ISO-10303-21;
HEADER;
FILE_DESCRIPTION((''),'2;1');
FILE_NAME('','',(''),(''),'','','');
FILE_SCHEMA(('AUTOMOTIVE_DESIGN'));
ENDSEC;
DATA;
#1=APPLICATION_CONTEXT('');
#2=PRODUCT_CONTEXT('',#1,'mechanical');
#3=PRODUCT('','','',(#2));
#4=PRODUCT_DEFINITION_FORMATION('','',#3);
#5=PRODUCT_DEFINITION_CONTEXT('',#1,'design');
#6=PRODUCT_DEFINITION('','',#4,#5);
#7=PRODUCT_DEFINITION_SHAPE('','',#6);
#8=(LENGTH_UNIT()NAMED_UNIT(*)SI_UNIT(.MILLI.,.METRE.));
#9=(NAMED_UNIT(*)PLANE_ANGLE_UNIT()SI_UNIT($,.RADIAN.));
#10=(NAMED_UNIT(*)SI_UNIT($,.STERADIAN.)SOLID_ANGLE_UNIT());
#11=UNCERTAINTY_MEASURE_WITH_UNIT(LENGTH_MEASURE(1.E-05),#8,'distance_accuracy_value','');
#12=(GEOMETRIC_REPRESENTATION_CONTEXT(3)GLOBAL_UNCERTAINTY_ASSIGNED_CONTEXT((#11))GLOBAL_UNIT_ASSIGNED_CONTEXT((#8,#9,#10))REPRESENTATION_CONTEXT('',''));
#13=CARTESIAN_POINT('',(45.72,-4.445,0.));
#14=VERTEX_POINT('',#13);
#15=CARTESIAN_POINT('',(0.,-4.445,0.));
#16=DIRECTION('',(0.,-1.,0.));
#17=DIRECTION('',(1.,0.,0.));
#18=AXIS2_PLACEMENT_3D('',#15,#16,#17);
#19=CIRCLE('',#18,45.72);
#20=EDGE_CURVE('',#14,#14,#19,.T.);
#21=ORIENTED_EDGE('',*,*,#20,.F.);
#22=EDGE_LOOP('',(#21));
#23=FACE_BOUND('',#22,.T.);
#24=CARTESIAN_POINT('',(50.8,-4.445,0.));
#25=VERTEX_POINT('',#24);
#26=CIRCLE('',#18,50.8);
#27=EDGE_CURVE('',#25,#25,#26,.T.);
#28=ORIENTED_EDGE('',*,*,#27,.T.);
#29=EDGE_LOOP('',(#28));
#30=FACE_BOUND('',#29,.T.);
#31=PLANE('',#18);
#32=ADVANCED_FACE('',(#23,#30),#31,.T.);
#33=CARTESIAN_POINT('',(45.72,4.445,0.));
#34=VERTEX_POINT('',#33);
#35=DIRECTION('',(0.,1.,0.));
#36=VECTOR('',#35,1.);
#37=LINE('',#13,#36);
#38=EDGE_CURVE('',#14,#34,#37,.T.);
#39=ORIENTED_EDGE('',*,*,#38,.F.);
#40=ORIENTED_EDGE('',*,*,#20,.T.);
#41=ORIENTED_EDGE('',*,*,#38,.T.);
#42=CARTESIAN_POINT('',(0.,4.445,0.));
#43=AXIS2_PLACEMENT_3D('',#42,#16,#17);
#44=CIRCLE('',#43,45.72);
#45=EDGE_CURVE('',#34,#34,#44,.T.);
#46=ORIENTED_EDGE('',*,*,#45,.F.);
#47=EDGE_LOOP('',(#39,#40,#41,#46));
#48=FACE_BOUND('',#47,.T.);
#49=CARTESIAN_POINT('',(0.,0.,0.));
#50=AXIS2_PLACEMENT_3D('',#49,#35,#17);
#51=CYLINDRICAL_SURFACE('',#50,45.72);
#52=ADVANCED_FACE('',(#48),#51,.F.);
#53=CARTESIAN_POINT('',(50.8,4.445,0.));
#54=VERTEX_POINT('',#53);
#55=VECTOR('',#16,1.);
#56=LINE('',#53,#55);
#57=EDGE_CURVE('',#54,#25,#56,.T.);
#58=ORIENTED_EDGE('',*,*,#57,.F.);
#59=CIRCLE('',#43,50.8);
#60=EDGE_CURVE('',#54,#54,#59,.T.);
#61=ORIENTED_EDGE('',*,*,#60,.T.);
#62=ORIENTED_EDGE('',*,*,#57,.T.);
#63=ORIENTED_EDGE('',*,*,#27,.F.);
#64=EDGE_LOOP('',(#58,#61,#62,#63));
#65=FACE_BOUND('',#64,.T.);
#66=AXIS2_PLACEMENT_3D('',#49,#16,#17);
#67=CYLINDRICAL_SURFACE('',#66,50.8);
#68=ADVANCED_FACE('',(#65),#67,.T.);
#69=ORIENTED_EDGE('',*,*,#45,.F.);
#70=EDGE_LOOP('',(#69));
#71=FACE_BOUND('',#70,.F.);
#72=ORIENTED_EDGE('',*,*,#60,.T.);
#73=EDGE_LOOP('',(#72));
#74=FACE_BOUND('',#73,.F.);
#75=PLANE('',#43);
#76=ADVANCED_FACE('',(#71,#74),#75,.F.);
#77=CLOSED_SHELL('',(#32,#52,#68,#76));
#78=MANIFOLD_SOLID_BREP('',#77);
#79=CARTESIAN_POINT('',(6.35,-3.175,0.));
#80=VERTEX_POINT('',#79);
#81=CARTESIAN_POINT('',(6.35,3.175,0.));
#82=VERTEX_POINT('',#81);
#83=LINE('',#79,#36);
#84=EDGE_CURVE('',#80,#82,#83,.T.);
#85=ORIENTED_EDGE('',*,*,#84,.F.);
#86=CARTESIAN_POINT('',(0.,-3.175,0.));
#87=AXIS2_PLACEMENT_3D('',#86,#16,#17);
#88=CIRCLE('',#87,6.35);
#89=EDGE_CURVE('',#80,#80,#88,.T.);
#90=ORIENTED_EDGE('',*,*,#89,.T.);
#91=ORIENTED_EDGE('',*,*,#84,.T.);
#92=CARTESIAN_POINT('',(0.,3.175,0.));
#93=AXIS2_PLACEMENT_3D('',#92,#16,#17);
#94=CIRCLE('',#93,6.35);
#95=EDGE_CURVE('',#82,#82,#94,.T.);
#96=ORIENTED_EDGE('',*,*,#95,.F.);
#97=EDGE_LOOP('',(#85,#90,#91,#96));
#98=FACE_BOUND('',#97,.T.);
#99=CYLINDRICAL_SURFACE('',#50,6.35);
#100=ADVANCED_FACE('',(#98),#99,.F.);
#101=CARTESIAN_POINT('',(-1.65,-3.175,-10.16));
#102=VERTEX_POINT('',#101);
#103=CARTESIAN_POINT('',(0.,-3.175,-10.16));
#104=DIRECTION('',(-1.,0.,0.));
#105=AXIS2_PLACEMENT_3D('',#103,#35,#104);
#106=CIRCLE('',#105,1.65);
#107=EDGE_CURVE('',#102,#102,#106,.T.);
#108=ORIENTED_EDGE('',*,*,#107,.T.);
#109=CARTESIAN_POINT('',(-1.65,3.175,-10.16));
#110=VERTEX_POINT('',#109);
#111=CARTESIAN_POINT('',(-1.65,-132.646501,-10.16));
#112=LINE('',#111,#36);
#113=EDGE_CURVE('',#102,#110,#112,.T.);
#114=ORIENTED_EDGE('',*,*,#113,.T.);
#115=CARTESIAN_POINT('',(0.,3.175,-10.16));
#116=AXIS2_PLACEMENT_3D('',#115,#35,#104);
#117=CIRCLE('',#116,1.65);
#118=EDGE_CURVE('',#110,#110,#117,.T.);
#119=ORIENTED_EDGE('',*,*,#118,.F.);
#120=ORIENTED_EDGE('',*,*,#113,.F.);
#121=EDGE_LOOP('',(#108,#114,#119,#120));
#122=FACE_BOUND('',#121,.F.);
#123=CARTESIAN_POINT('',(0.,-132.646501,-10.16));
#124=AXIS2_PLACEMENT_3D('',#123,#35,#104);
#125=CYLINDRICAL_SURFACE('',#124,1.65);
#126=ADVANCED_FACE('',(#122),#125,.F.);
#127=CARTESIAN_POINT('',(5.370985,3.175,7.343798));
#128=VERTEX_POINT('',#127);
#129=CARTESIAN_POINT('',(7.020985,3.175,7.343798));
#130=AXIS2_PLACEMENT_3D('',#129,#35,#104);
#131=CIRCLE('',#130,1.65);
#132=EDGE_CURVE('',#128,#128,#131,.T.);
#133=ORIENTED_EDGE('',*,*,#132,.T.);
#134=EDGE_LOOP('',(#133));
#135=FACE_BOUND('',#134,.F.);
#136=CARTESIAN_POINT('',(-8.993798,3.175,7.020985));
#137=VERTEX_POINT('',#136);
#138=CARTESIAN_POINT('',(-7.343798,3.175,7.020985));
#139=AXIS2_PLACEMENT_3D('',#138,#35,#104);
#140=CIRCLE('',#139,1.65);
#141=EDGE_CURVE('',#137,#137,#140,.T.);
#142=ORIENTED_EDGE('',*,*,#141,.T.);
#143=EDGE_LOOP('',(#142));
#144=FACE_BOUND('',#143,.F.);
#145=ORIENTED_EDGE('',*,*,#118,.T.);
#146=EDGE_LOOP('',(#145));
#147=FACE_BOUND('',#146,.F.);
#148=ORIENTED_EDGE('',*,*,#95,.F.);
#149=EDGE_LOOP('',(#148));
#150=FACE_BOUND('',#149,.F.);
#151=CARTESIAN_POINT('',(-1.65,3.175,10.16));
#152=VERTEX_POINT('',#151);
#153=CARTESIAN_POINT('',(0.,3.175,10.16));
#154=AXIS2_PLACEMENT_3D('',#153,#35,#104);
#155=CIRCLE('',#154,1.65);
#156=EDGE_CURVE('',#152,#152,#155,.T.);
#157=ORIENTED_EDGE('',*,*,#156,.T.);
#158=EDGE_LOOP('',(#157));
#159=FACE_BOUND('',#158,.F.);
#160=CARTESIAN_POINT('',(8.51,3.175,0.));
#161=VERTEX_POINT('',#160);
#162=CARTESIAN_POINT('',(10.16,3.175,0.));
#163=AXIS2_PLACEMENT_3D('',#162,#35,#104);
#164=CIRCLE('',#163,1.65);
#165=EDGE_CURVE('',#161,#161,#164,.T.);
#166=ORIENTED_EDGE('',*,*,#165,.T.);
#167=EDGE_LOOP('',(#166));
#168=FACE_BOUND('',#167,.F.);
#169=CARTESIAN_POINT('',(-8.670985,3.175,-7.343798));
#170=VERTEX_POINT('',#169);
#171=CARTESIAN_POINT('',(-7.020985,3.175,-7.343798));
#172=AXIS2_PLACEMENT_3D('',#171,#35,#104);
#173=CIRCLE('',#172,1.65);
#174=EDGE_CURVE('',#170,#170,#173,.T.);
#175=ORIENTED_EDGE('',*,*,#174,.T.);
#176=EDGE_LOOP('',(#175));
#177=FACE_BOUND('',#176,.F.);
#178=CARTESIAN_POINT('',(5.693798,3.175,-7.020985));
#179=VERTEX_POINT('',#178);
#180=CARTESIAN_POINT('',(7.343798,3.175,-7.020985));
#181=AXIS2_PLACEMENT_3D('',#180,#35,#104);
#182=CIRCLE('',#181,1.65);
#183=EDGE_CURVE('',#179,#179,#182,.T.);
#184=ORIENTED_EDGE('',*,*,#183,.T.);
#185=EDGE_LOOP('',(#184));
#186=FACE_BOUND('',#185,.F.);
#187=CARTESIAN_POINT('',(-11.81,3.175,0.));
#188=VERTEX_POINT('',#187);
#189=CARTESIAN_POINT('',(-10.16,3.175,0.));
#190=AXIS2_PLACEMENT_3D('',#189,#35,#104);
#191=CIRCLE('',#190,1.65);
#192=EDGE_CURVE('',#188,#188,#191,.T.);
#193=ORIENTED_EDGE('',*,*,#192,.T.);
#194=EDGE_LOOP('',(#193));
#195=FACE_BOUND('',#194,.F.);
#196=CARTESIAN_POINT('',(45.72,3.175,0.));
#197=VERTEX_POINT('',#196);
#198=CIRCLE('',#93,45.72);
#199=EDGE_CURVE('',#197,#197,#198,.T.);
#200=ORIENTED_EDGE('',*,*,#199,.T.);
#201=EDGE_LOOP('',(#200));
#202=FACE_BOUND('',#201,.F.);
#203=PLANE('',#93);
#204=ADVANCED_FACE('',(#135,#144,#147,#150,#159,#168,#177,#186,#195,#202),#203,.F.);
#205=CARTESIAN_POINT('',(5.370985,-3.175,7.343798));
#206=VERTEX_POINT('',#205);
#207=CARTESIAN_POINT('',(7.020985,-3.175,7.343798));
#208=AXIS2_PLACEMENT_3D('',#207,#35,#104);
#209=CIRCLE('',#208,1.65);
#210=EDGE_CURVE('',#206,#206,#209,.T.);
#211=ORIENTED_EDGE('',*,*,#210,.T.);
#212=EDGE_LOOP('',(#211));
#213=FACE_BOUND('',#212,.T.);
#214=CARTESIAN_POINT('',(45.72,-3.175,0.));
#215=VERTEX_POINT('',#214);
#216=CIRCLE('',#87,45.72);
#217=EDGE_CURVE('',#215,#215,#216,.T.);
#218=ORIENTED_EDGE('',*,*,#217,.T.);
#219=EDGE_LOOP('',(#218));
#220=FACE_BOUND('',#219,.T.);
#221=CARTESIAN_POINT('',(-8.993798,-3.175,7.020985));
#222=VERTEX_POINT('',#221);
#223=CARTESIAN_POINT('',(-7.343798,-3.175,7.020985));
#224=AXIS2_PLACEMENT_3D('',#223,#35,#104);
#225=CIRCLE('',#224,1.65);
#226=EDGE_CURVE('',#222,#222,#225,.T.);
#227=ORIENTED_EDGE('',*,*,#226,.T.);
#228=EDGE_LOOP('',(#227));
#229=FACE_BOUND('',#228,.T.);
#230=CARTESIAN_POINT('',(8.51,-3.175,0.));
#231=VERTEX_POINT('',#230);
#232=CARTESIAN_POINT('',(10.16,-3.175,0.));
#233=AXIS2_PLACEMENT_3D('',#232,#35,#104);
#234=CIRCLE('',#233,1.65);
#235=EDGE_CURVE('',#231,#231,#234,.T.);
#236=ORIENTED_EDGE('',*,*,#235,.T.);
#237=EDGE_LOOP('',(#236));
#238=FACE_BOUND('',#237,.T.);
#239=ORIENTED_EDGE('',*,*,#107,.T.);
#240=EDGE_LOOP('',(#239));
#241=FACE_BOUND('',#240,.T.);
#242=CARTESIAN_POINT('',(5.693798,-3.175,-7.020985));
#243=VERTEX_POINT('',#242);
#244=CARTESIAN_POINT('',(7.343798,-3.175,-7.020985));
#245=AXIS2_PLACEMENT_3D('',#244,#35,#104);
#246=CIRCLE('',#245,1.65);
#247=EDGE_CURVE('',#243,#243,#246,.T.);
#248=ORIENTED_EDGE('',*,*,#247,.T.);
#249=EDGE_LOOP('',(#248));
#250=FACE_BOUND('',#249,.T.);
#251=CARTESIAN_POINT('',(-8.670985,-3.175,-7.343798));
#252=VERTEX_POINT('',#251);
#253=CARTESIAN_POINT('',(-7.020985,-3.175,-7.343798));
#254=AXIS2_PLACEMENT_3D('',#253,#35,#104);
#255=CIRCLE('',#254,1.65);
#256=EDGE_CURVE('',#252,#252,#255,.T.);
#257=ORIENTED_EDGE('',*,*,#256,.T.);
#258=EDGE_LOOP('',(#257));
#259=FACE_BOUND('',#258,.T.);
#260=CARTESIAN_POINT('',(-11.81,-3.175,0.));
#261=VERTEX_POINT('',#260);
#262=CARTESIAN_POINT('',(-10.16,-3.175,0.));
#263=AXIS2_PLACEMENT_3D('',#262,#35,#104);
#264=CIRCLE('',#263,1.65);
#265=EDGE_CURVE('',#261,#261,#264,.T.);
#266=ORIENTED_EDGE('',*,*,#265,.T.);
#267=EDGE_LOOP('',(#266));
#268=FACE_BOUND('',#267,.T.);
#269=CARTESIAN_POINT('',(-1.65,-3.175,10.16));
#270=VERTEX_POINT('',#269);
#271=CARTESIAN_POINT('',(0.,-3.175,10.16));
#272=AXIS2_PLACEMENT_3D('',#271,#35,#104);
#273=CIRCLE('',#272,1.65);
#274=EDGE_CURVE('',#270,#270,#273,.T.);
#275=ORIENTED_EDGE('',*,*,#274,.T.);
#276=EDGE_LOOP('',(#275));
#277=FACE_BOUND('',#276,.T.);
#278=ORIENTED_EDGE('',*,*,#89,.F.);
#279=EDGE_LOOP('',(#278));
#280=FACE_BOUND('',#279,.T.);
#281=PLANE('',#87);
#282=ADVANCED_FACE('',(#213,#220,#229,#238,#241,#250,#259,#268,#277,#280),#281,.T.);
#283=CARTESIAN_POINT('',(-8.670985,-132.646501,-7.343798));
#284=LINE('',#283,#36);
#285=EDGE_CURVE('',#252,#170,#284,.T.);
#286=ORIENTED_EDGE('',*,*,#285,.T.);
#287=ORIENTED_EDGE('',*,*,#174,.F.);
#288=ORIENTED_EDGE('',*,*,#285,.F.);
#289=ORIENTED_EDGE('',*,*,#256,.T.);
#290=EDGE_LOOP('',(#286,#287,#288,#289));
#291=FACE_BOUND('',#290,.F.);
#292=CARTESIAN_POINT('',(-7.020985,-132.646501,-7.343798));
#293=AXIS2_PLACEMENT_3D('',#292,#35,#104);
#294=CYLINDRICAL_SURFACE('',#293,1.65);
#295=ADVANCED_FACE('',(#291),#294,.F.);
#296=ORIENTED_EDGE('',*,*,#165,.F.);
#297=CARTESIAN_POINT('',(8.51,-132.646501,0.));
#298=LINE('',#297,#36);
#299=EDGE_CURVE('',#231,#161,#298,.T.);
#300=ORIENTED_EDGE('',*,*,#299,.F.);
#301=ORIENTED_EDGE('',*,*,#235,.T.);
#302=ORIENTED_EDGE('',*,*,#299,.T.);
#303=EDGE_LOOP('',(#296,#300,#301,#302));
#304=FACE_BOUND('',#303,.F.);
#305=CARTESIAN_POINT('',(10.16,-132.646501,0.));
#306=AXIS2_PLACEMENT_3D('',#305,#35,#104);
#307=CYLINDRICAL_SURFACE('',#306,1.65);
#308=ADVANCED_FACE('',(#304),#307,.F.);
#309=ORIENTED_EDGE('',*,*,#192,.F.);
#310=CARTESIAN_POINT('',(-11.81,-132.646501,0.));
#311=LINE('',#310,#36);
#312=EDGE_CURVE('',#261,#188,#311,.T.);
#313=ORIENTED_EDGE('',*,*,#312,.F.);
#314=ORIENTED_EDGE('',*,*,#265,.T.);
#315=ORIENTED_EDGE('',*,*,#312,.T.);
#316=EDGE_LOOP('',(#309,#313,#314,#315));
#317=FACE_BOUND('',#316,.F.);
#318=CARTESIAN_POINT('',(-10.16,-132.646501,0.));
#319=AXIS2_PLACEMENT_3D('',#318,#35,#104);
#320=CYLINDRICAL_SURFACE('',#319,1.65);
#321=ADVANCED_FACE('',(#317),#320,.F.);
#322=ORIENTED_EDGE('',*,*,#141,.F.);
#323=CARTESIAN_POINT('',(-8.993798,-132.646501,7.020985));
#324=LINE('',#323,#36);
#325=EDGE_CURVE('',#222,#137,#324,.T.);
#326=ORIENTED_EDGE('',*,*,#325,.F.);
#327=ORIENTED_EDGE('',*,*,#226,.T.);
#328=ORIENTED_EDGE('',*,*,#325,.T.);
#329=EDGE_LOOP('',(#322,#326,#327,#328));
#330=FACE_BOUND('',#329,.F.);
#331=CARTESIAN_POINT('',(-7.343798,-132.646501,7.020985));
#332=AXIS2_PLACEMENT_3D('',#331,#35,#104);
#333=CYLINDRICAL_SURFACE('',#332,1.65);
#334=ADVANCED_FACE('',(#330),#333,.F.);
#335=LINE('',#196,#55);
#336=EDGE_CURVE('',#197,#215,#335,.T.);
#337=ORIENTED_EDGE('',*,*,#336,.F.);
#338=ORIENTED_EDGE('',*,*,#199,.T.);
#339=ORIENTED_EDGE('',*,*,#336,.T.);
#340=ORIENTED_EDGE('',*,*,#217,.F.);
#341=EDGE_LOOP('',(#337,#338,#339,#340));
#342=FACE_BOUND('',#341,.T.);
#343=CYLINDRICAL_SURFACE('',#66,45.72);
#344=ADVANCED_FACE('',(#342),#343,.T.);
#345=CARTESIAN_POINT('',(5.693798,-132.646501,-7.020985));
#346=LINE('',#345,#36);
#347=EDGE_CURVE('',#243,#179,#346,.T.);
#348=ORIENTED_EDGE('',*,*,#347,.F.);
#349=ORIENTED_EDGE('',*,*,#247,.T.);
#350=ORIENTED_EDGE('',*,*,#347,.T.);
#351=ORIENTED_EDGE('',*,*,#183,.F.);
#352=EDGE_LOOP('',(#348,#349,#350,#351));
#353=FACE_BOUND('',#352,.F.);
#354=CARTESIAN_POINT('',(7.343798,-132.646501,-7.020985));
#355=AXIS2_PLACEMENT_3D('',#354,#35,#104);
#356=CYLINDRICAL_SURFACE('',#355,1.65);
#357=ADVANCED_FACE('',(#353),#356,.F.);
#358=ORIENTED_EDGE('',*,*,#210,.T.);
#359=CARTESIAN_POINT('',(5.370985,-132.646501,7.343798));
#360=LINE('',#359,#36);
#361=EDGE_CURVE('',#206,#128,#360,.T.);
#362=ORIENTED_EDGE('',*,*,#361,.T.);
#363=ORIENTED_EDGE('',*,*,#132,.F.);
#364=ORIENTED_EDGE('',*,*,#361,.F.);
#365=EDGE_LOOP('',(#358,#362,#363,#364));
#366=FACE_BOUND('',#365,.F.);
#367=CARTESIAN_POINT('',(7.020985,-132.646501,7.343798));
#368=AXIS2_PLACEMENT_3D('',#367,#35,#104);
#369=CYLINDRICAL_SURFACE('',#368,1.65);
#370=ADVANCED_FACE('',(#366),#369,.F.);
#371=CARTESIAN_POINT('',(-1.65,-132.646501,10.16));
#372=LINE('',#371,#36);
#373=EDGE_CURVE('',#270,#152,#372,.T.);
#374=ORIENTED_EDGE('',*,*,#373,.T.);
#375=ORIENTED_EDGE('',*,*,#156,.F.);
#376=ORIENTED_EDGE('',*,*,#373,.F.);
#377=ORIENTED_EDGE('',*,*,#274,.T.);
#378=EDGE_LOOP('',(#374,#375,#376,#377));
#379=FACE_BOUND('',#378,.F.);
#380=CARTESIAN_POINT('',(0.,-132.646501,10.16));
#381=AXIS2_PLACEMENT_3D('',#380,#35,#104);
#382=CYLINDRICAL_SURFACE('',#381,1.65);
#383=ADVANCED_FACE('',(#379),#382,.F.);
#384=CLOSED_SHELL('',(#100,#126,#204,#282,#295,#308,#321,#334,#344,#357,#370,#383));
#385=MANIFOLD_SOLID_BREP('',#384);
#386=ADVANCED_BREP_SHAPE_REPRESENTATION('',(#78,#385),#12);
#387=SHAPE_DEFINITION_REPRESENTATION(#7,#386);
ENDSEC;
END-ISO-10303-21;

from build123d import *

# Parameters (mm, degrees)
F0_R     = 50.8
F0_R_2   = 45.72
F1_DEPTH = 4.445
F0_R_3   = 6.35
F2_DEPTH = 3.175
F4_D     = 3.3


# Not quite as in the source:
# - a feature names something its author has since deleted; it is built from what else it names


with BuildPart() as f1:
    # F0 (on Front) → F1 (new body, symmetric)
    with BuildSketch(Plane.XZ):
        Circle(F0_R)
        Circle(F0_R_2, mode=Mode.SUBTRACT)
    extrude(amount=F1_DEPTH, both=True)


with BuildPart() as f2:
    # F0 (on Front) → F2 (new body, symmetric)
    with BuildSketch(Plane.XZ):
        Circle(F0_R_2)
        Circle(F0_R_3, mode=Mode.SUBTRACT)
    extrude(amount=F2_DEPTH, both=True)

    # F4 (through all)
    with Locations(Plane.XZ.offset(3.175)):
        with Locations((10.16, 0), (7.3437980366, -7.0209850019), (0, -10.16), (-7.0209850019, -7.3437980366), (-10.16, 0), (-7.3437980366, 7.0209850019), (0, 10.16), (7.0209850019, 7.3437980366)):
            Hole(F4_D / 2)


solid = Compound([f1.part, f2.part])
